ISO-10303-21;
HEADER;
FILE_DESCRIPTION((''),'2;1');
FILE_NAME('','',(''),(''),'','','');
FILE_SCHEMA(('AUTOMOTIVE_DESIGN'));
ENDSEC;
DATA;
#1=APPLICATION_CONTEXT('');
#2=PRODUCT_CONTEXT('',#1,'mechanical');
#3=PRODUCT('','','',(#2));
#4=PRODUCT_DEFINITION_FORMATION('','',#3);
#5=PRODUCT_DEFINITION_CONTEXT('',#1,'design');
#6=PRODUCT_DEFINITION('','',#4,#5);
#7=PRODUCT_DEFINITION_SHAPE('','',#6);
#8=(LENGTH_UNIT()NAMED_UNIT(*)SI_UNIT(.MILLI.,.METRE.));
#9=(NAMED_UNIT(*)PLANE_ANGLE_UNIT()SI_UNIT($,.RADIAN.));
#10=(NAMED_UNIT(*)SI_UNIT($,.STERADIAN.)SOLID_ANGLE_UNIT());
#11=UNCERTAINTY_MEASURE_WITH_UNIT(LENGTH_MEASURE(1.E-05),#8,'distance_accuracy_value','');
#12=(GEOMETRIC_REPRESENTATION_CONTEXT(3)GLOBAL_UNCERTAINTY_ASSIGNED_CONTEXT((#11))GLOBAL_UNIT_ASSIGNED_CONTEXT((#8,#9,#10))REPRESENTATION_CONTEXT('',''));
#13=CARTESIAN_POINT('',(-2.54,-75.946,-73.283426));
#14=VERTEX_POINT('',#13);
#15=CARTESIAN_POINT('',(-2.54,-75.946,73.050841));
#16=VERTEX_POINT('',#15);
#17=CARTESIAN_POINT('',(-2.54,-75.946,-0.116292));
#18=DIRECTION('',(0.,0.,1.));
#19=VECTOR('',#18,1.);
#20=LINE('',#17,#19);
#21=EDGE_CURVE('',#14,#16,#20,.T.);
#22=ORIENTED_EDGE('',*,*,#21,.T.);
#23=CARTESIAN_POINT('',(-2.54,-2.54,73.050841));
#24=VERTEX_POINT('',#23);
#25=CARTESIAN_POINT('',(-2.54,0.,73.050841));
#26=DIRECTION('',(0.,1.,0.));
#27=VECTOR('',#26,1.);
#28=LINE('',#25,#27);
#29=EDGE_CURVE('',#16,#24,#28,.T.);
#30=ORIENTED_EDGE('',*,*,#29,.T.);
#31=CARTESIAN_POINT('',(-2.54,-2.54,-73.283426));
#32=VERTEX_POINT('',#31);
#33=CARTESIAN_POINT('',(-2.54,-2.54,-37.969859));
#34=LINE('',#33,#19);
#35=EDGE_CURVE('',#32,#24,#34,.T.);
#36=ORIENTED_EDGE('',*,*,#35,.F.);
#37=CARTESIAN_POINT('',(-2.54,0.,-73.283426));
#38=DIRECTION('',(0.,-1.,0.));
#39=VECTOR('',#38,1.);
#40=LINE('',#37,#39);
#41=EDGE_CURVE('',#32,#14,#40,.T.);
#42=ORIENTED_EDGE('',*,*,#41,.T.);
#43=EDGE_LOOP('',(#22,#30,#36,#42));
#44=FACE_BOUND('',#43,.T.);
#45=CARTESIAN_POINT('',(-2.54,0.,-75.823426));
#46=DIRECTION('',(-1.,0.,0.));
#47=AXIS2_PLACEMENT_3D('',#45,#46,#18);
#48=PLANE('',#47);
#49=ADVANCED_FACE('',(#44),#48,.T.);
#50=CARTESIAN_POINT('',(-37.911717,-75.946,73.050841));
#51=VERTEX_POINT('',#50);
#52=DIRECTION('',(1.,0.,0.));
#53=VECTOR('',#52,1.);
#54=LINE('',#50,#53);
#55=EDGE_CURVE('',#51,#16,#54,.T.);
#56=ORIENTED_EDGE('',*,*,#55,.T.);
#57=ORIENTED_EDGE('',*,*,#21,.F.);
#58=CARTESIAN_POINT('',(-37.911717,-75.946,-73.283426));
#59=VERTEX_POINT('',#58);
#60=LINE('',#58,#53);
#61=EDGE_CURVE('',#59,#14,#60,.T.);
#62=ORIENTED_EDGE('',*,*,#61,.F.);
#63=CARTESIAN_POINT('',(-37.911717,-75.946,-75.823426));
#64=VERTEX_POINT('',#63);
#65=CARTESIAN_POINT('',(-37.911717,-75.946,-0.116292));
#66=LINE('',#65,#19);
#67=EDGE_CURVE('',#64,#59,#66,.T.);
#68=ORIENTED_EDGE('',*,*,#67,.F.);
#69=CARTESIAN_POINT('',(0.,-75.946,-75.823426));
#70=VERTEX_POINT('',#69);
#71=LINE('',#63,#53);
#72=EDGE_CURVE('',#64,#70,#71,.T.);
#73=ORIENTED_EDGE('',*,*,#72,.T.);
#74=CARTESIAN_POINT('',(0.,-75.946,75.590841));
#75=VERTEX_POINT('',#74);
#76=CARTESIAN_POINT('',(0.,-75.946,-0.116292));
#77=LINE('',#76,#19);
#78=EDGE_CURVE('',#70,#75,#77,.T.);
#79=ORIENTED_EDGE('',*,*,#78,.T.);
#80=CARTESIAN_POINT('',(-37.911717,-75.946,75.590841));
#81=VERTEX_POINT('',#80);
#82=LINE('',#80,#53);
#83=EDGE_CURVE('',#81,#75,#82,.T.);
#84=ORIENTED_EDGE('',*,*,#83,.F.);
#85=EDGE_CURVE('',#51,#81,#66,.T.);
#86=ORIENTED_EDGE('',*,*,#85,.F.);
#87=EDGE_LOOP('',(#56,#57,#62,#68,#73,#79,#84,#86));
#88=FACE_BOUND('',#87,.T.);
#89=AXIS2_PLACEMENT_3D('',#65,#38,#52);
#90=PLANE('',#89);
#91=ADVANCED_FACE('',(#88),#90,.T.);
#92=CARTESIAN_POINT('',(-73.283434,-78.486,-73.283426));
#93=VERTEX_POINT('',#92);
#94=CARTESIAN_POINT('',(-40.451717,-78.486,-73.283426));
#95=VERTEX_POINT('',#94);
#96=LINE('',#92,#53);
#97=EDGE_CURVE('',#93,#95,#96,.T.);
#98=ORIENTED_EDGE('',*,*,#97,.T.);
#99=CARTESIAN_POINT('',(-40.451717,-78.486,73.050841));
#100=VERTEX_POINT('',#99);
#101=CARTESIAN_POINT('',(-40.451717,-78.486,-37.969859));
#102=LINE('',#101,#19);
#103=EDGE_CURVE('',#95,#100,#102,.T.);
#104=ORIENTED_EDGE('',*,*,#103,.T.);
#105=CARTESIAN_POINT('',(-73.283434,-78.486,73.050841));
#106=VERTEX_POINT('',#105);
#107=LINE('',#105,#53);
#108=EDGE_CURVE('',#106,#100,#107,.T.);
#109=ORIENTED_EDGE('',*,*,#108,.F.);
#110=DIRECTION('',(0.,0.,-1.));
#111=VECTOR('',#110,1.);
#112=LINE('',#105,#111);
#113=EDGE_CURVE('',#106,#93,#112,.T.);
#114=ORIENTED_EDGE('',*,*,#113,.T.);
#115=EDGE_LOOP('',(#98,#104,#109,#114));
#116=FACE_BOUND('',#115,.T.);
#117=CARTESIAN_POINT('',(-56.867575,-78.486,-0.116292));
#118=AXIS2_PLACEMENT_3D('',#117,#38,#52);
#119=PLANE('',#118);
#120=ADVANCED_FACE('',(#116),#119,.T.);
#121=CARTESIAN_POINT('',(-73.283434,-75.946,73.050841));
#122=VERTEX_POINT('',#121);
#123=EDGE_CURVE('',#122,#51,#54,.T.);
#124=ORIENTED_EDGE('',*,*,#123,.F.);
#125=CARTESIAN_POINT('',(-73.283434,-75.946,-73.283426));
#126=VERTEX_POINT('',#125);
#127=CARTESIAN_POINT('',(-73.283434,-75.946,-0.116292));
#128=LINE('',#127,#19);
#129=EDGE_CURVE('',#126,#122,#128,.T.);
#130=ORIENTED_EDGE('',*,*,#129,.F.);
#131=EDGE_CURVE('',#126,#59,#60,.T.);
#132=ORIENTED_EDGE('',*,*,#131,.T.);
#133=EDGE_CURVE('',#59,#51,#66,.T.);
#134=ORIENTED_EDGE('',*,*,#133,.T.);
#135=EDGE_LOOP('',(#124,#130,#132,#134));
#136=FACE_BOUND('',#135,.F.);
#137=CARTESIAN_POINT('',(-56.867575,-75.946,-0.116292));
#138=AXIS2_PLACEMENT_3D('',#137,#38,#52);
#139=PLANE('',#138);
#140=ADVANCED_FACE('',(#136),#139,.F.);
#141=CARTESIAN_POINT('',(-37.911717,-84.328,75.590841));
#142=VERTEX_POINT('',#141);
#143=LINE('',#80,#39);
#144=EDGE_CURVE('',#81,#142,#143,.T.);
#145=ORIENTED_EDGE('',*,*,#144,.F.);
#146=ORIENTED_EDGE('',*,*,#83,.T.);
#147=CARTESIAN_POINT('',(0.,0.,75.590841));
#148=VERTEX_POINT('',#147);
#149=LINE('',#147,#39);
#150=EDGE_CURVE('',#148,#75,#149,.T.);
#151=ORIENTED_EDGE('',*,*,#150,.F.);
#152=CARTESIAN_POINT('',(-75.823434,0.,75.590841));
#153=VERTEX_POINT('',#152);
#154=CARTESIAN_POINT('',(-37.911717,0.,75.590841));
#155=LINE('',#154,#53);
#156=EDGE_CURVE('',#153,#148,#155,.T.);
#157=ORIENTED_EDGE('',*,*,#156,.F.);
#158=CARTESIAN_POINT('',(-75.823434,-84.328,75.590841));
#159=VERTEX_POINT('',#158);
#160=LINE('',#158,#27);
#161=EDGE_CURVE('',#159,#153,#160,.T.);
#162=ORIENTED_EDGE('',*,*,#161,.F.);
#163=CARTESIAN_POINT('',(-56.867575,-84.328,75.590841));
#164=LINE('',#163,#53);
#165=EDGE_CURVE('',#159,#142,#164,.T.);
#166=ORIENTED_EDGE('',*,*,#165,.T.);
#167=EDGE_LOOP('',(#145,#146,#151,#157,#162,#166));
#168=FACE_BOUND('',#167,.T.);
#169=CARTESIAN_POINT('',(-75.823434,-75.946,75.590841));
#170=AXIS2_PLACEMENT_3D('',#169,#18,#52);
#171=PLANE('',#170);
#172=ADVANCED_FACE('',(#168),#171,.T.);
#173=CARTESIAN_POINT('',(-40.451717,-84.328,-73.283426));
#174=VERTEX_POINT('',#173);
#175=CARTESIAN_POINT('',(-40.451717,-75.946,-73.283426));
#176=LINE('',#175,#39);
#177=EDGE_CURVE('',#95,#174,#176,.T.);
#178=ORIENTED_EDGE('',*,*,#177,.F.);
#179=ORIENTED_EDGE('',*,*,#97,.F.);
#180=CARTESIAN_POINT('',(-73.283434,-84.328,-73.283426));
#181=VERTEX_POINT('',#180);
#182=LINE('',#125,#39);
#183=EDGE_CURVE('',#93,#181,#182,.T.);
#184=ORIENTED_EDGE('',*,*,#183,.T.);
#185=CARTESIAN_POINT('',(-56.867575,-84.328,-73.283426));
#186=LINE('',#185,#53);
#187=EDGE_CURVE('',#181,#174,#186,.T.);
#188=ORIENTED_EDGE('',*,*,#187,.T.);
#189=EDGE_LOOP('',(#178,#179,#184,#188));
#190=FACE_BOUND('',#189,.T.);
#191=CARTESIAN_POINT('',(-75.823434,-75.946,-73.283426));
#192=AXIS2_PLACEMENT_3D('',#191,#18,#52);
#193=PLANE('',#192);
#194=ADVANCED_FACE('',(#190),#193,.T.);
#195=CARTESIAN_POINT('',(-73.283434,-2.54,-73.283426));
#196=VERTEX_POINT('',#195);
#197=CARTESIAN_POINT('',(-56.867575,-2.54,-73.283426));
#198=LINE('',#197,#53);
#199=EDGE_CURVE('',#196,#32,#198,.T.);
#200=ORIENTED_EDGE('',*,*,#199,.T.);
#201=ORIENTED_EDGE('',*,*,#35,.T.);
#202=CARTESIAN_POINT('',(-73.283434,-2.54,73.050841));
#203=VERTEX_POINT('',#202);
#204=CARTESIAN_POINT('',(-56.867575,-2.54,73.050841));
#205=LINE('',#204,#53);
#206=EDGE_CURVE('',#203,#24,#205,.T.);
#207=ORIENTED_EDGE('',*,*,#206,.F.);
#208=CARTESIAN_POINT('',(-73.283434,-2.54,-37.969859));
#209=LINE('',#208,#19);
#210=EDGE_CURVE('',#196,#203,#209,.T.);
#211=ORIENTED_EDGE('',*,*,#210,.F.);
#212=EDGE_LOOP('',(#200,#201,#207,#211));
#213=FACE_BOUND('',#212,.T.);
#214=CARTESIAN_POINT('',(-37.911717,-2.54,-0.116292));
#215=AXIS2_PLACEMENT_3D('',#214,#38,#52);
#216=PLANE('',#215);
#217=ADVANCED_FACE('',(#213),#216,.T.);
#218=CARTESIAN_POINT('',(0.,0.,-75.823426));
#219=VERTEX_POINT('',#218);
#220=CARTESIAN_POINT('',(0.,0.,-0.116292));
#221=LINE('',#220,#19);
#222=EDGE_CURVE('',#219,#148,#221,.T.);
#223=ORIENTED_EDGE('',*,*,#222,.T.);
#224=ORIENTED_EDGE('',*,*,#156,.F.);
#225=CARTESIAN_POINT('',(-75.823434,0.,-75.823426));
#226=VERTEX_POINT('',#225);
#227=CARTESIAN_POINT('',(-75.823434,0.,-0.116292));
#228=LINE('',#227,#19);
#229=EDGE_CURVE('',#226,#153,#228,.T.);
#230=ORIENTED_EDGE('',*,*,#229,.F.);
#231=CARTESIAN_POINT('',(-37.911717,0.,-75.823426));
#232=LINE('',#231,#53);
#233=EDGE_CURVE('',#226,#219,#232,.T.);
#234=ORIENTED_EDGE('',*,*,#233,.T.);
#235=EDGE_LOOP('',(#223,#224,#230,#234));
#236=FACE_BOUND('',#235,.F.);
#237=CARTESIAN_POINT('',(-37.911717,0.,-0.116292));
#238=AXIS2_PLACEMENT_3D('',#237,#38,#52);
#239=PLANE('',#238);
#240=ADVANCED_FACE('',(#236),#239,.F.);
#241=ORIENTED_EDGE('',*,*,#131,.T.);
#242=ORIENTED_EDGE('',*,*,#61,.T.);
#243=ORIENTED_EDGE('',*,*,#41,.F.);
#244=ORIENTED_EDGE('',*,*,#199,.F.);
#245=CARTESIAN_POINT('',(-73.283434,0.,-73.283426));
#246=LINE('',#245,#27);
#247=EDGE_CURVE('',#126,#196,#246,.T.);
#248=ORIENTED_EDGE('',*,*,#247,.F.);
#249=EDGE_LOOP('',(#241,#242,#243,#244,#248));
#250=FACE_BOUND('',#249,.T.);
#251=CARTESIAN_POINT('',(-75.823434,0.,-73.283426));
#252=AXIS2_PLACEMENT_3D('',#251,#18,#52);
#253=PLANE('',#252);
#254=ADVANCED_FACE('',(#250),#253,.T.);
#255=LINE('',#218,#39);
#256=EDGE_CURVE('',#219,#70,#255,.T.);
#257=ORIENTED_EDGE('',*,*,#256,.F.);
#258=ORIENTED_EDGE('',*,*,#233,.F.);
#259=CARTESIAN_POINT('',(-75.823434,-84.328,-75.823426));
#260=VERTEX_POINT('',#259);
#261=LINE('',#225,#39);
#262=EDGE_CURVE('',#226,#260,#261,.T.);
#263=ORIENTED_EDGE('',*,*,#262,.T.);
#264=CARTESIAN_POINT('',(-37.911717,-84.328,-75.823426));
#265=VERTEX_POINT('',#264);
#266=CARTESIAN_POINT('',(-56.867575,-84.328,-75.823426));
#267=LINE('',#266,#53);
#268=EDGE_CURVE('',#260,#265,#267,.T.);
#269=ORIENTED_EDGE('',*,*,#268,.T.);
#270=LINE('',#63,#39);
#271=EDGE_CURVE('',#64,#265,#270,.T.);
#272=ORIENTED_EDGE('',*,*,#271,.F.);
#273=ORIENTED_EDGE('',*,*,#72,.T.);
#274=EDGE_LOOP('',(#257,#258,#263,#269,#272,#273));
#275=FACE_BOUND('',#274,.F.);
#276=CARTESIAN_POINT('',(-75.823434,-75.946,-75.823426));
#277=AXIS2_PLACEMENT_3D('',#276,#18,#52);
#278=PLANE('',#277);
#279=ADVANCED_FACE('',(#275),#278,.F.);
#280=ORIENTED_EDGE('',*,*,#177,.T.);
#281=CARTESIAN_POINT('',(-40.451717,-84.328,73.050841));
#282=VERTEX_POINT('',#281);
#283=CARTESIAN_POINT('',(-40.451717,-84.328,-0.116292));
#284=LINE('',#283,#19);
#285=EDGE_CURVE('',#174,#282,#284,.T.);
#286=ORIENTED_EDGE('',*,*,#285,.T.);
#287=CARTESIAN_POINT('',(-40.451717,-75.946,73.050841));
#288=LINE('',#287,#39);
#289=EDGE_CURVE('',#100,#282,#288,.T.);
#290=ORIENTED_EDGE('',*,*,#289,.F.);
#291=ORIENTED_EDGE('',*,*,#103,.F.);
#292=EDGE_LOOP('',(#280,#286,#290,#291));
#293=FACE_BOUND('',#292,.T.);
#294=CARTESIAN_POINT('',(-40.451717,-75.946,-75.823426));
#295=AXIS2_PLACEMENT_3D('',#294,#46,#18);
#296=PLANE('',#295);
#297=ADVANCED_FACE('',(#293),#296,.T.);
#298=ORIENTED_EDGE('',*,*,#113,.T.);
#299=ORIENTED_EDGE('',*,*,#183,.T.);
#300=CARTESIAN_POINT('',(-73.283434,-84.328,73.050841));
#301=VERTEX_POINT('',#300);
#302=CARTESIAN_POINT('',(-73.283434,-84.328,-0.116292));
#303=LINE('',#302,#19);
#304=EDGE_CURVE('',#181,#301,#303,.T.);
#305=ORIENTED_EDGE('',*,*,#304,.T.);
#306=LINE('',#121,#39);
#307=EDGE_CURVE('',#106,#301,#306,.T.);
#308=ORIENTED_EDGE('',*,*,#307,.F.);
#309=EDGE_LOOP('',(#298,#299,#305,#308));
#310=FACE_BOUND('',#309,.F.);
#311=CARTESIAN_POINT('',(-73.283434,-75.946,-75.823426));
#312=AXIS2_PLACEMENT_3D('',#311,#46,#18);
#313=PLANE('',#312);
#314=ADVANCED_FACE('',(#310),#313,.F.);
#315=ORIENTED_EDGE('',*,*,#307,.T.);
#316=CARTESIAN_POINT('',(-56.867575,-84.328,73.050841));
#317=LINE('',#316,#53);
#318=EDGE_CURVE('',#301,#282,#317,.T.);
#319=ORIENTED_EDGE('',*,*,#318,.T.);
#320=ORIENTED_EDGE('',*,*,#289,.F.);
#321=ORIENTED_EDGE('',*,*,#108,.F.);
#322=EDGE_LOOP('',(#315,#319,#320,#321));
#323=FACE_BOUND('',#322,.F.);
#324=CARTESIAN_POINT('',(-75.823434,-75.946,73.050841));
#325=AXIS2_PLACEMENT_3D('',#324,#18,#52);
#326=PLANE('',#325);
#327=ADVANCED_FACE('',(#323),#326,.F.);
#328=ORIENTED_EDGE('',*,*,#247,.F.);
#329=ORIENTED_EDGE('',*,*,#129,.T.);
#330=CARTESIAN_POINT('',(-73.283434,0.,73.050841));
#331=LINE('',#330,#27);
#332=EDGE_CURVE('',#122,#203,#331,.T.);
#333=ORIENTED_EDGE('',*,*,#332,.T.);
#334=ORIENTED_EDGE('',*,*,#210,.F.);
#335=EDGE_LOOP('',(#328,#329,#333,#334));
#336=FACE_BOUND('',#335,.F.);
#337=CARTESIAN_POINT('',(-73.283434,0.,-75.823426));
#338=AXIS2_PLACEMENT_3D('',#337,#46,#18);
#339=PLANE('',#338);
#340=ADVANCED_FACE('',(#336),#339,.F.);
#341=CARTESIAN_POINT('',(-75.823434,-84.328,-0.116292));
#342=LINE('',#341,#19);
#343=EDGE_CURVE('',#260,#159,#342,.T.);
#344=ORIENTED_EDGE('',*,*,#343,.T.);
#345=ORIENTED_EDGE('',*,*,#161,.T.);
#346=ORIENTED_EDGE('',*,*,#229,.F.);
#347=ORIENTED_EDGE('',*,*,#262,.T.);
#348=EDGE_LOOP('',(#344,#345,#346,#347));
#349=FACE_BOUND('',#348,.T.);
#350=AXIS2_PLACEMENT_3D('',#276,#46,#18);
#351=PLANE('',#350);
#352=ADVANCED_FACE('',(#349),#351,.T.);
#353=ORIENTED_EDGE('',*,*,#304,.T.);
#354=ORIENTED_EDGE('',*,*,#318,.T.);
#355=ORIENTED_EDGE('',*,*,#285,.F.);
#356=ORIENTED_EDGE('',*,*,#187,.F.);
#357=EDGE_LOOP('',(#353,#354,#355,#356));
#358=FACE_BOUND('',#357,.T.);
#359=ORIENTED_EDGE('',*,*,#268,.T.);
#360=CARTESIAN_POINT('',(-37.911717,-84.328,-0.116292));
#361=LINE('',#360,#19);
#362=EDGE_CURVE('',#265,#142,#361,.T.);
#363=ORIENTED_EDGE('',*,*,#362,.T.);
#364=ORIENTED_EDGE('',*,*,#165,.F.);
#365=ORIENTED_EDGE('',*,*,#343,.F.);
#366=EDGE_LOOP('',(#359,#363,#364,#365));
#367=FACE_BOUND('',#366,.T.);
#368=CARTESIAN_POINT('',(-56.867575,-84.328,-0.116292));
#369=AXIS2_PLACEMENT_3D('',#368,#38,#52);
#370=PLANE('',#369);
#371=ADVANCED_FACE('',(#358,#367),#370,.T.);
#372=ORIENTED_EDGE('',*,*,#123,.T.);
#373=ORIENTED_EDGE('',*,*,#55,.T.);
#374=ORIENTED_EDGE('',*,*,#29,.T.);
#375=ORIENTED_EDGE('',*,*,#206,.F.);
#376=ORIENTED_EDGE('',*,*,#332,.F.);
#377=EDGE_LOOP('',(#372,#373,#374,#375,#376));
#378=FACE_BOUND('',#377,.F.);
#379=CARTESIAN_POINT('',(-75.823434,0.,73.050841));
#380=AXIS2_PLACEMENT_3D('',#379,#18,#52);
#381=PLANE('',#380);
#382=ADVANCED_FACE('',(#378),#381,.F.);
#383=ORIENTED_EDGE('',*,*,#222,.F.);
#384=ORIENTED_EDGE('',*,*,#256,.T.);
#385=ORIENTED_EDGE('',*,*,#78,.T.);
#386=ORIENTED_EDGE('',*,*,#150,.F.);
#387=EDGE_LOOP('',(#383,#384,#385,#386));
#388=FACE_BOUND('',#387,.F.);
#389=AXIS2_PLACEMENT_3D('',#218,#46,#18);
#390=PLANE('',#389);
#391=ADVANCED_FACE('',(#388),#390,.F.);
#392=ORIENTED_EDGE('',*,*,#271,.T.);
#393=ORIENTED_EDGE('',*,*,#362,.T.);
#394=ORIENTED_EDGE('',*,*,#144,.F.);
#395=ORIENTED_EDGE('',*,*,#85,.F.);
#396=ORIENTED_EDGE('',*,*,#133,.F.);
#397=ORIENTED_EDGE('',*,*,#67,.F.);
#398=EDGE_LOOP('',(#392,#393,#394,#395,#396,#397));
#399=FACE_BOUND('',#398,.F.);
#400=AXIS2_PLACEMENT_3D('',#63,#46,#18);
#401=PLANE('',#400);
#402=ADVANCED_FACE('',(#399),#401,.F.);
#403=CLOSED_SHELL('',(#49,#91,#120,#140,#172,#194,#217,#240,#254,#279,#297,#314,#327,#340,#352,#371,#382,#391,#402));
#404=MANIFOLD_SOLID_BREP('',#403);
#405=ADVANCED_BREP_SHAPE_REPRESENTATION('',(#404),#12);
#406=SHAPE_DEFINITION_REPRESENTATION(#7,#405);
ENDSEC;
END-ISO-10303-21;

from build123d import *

# Parameters (mm, degrees)
F0_W         = 75.8234336972
F0_H         = 151.4142677188
F1_DEPTH     = 75.946
F3_T         = -2.54
F2_W         = 37.9117168486
F2_H         = 151.4142677188
F4_DEPTH     = 8.382
F5_T         = 2.54
F5_T3_DEPTH  = 7.62
F5_T5_DEPTH  = 7.62
F5_T7_DEPTH  = 40.4517168486
F5_T9_DEPTH  = 151.4142677188
F5_T11_DEPTH = 78.486
F5_T13_DEPTH = 75.8234336972


# Not quite as in the source:
# - a shell that OpenCascade refuses in one call is made with other operations: the cavity is built on its own and cut out


with BuildPart() as f1:
    # F0 (on Front) → F1 (new body)
    with BuildSketch(Plane.XZ):
        with Locations((-37.9117168486, -0.1162923872)):
            Rectangle(F0_W, F0_H)
    extrude(amount=F1_DEPTH)

    # F3
    f3_openings = [f1.faces().sort_by_distance(p)[0] for p in [
        (-37.911717, -75.946, -0.116292),
    ]]
    offset(amount=F3_T, openings=f3_openings)

    # F2 (on face) → F4 (join)
    with BuildSketch(Plane.XZ.offset(75.946)):
        with Locations((-56.8675752729, -0.1162923872)):
            Rectangle(F2_W, F2_H)
    extrude(amount=F4_DEPTH)

    # F5: shell of thickness 2.54, made by hand


with BuildPart() as f5_core1:
    # F5_t2: copy of F1
    add(f1.part)

    # the walls: a layer under each face that stays
    f5_faces = [f5_core1.faces().sort_by_distance(p)[0] for p in [
        (-37.9117168486, -42.164, 75.5908414721),
        (-37.9117168486, 0, -0.1162923872),
        (-37.9117168486, -42.164, -75.8234262466),
        (-75.8234336972, -42.164, -0.1162923872),
        (-37.9117168486, -80.137, -0.1162923872),
        (-55.5975752729, -75.946, -0.1162923872),
        (-37.9117168486, -39.243, 73.0508414721),
        (-2.54, -39.243, -0.1162923872),
        (-37.9117168486, -2.54, -0.1162923872),
        (-73.2834336972, -39.243, -0.1162923872),
        (-37.9117168486, -39.243, -73.2834262466),
        (-1.263723895, -75.946, -70.7762839894),
        (0, -37.973, -0.1162923872),
    ]]
    thicken(f5_faces, amount=-F5_T, mode=Mode.SUBTRACT)

    # F5_s4 → F5_t3 (cut)
    with BuildSketch(Plane.XY.offset(-78.3634262466)):
        Polygon((-37.8863168486, -75.9714), (-40.4517168486, -75.946), (-40.4517168486, -73.406), (-37.9117168486, -73.406), align=None)
    extrude(amount=F5_T3_DEPTH, mode=Mode.SUBTRACT)

    # F5_s6 → F5_t5 (cut)
    with BuildSketch(Plane.XY.offset(70.5108414721)):
        Polygon((-37.8863168486, -75.9714), (-40.4517168486, -75.946), (-40.4517168486, -73.406), (-37.9117168486, -73.406), align=None)
    extrude(amount=F5_T5_DEPTH, mode=Mode.SUBTRACT)

    # F5_s8 → F5_t7 (cut)
    with BuildSketch(Plane.YZ.offset(-75.8234336972)):
        Polygon((-75.9206, -73.2580262466), (-78.486, -73.2834262466), (-78.486, -75.8234262466), (-75.946, -75.8234262466), align=None)
        Polygon((-75.9206, 73.0254414721), (-78.486, 73.0508414721), (-78.486, 75.5908414721), (-75.946, 75.5908414721), align=None)
    extrude(amount=F5_T7_DEPTH, mode=Mode.SUBTRACT)

    # F5_s10 → F5_t9 (cut)
    with BuildSketch(Plane.XY.offset(-75.8234262466)):
        Polygon((-73.2580336972, -75.9206), (-73.2834336972, -78.486), (-75.8234336972, -78.486), (-75.8234336972, -75.946), align=None)
        Polygon((-2.5654, -2.5654), (0, -2.54), (0, 0), (-2.54, 0), align=None)
        Polygon((-73.2580336972, -2.5654), (-73.2834336972, 0), (-75.8234336972, 0), (-75.8234336972, -2.54), align=None)
    extrude(amount=F5_T9_DEPTH, mode=Mode.SUBTRACT)

    # F5_s12 → F5_t11 (cut)
    with BuildSketch(Plane.XZ):
        Polygon((-73.2580336972, 73.0254414721), (-73.2834336972, 75.5908414721), (-75.8234336972, 75.5908414721), (-75.8234336972, 73.0508414721), align=None)
        Polygon((-2.5654, 73.0254414721), (-2.54, 75.5908414721), (0, 75.5908414721), (0, 73.0508414721), align=None)
        Polygon((-2.5654, -73.2580262466), (0, -73.2834262466), (0, -75.8234262466), (-2.54, -75.8234262466), align=None)
        Polygon((-73.2580336972, -73.2580262466), (-75.8234336972, -73.2834262466), (-75.8234336972, -75.8234262466), (-73.2834336972, -75.8234262466), align=None)
    extrude(amount=F5_T11_DEPTH, mode=Mode.SUBTRACT)

    # F5_s14 → F5_t13 (cut)
    with BuildSketch(Plane.YZ.offset(-75.8234336972)):
        Polygon((-2.5654, 73.0254414721), (-2.54, 75.5908414721), (0, 75.5908414721), (0, 73.0508414721), align=None)
        Polygon((-2.5654, -73.2580262466), (0, -73.2834262466), (0, -75.8234262466), (-2.54, -75.8234262466), align=None)
    extrude(amount=F5_T13_DEPTH, mode=Mode.SUBTRACT)


with BuildPart() as f1_1:
    add(f1.part)

    # what is left inside the walls is the cavity
    f5_cavity = [f5_core1.part.solids().sort_by_distance(p)[0] for p in [
        (-56.867575, -78.5114, -24.505337),
    ]]
    add(f5_cavity, mode=Mode.SUBTRACT)


solid = f1_1.part
